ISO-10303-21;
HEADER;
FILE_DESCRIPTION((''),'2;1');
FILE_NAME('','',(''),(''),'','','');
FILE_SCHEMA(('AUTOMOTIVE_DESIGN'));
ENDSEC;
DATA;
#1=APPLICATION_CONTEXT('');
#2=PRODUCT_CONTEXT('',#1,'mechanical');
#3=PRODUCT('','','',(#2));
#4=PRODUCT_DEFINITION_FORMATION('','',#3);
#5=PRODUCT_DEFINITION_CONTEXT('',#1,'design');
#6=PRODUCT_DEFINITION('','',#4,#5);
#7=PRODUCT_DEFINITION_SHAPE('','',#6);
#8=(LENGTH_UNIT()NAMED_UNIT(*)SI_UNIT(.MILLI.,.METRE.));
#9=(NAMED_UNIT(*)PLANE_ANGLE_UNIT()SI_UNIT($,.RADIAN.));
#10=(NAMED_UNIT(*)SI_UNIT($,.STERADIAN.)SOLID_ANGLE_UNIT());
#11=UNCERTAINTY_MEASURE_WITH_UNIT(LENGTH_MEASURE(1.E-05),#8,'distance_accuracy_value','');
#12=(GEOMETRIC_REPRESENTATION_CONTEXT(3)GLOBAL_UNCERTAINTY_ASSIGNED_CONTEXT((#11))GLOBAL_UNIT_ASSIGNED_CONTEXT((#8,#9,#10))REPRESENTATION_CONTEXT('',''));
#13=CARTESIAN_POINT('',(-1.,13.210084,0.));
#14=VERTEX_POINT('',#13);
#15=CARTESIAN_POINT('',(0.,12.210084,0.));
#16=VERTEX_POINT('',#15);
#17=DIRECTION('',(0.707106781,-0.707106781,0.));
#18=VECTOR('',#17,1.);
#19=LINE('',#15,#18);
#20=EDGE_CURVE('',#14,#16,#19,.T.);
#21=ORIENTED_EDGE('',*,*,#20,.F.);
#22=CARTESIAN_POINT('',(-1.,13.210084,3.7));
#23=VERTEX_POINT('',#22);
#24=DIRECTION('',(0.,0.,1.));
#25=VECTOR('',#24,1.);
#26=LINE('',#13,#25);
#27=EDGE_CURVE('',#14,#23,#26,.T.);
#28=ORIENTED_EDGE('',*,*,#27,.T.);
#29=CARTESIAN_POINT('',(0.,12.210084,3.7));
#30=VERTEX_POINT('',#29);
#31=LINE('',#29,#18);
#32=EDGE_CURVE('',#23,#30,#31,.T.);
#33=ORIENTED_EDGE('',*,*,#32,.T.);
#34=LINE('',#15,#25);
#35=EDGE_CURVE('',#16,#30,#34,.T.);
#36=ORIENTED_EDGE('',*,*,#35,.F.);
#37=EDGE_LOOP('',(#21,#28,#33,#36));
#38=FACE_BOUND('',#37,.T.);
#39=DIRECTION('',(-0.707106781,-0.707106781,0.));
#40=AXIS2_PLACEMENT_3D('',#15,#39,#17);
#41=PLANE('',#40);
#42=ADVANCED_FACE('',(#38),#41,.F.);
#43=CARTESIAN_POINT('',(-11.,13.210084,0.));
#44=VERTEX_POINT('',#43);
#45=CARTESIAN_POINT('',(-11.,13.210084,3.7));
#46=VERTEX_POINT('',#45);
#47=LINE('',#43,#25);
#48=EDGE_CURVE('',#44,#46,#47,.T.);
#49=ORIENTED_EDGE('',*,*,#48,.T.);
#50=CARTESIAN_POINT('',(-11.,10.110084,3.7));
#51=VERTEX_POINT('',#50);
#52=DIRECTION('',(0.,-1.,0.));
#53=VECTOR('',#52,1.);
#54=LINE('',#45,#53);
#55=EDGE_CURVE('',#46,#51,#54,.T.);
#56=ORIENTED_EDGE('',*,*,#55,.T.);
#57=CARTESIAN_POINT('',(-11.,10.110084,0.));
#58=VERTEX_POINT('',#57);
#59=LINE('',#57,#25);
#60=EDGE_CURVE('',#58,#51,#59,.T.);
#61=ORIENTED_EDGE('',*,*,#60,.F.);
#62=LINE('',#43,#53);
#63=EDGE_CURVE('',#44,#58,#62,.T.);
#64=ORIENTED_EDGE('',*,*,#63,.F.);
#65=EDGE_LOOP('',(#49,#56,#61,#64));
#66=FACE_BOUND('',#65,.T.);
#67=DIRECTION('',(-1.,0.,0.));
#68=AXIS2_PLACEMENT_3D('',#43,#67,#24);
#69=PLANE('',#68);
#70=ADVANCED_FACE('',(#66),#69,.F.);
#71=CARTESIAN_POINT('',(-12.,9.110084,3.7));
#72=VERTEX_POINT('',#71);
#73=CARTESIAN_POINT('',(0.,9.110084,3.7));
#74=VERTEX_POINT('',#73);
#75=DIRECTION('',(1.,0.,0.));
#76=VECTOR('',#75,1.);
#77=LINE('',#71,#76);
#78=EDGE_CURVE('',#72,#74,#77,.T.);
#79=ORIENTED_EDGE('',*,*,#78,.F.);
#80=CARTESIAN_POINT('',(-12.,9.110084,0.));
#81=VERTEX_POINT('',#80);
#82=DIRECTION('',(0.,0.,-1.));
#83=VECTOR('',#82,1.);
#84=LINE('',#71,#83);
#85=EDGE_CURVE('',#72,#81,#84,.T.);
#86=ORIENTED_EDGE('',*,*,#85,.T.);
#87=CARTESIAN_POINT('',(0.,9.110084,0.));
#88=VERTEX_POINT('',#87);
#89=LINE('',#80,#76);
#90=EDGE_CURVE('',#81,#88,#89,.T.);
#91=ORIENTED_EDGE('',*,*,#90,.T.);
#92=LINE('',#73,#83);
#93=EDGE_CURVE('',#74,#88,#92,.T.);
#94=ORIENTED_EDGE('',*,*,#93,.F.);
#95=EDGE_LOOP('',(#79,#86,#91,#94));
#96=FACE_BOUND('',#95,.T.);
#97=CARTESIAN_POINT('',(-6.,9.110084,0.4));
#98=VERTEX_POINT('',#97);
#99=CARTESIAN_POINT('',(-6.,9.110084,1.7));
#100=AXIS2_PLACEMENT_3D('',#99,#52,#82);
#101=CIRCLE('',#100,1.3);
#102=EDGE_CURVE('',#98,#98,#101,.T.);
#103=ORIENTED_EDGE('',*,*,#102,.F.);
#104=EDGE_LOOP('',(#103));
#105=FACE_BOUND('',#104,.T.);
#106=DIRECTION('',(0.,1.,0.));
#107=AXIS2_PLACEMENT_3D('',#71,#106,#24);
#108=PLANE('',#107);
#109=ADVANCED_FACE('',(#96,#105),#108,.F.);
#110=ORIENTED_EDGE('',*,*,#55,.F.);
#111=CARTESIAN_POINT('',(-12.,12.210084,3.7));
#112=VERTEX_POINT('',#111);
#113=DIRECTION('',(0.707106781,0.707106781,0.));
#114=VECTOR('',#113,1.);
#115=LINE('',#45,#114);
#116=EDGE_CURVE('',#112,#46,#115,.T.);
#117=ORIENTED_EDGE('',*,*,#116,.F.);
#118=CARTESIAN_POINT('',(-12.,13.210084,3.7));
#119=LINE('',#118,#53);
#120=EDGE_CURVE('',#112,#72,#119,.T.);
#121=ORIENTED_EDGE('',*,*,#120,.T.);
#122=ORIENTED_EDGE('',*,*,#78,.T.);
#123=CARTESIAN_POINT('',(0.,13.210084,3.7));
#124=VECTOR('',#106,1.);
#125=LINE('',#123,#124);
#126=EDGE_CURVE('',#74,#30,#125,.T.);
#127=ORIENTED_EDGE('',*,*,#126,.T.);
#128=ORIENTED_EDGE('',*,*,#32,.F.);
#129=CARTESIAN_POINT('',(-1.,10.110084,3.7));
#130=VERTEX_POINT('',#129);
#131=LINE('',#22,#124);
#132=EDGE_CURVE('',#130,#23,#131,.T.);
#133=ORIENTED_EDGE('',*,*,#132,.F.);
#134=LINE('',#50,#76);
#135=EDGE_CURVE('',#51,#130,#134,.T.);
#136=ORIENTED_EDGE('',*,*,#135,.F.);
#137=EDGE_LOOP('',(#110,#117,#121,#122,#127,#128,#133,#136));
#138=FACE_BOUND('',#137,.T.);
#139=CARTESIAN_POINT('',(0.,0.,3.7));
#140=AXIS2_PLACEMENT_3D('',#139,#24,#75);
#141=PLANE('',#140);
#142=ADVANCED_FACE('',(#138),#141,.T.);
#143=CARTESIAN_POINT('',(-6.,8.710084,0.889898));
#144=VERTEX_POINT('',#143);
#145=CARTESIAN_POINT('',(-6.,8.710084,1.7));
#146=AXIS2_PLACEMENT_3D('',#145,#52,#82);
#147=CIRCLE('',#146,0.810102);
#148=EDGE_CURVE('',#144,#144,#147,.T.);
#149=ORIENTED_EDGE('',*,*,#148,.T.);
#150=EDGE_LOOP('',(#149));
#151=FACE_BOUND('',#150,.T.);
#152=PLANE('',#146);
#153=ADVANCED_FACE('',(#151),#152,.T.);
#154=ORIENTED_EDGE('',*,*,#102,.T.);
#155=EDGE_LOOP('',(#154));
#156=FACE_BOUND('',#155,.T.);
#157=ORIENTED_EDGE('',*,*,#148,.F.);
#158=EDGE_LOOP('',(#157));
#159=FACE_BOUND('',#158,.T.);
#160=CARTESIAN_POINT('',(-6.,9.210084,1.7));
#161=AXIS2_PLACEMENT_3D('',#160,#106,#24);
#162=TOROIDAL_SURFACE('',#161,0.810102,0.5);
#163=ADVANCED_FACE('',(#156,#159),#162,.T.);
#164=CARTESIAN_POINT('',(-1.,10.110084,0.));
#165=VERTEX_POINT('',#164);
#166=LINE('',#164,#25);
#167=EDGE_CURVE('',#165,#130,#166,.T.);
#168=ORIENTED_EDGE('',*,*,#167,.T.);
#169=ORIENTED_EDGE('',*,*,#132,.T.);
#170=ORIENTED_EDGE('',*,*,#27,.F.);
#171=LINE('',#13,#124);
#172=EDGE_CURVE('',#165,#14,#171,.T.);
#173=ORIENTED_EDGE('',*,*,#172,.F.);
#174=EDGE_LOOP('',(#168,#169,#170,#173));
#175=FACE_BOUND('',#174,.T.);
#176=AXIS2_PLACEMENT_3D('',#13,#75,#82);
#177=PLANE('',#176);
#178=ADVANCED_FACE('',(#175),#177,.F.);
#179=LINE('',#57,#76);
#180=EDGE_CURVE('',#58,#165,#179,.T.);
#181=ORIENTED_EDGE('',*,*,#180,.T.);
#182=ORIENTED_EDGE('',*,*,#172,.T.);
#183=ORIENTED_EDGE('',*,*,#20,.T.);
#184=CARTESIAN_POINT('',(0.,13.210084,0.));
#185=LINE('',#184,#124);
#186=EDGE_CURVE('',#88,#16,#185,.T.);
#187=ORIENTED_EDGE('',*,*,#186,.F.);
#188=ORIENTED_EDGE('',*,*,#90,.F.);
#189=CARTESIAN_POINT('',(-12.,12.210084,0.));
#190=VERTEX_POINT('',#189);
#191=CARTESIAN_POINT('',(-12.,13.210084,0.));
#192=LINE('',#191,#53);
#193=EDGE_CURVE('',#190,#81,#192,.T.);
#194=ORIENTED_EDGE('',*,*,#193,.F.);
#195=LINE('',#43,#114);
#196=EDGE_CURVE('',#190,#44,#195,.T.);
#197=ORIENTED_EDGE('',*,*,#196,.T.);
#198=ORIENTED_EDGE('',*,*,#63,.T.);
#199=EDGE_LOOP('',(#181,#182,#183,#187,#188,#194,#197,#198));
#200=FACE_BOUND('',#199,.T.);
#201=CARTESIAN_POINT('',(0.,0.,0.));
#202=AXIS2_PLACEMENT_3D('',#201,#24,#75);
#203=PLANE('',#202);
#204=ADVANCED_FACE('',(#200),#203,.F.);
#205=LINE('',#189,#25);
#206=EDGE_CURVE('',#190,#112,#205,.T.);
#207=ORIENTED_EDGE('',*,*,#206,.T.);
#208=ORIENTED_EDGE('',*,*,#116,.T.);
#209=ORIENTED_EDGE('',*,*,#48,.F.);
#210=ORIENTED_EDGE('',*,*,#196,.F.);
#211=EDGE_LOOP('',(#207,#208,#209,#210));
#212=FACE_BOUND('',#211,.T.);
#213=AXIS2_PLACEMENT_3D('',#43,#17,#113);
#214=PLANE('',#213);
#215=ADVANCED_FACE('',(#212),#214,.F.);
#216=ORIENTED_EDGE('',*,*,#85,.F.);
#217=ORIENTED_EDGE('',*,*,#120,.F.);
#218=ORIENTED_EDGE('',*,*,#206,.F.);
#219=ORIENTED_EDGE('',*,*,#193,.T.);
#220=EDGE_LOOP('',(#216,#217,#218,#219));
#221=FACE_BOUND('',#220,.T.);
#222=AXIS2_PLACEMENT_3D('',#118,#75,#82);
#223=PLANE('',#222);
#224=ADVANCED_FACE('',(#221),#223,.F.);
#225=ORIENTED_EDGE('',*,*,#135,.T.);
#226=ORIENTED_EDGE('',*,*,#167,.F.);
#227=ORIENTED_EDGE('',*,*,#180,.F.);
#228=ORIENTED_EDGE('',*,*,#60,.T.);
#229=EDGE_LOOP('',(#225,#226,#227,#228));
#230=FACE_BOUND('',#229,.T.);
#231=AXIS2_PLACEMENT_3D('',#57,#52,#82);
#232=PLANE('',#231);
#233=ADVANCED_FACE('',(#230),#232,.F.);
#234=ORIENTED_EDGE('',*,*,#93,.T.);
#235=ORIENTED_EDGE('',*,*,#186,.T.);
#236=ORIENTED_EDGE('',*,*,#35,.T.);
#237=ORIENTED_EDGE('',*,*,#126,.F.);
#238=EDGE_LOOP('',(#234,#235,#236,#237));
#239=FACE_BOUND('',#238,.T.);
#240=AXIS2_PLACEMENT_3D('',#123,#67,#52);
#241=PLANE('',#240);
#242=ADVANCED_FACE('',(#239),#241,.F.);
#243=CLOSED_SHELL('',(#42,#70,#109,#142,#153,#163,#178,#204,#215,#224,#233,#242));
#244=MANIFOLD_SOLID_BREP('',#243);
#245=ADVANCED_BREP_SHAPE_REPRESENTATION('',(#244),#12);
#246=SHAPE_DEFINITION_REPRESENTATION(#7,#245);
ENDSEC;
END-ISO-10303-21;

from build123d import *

# Parameters (mm, degrees)
SKETCH1_W           = 12
SKETCH1_H           = 4.1
BOSS_EXTRUDE1_DEPTH = 3.7
CUT_EXTRUDE1_DEPTH  = 3.7
CUT_EXTRUDE2_DEPTH  = 3.7
SKETCH5_R           = 1.3
BOSS_EXTRUDE2_DEPTH = 0.4
FILLET1_R           = 0.5
SKETCH6_W           = 10
SKETCH6_H           = 3.1
CUT_EXTRUDE3_DEPTH  = 19.226253597


with BuildPart() as part:
    # Sketch1 → Boss-Extrude1 (new body)
    with BuildSketch(Plane.XY):
        with Locations((-6, 11.160084034)):
            Rectangle(SKETCH1_W, SKETCH1_H)
    extrude(amount=BOSS_EXTRUDE1_DEPTH)

    # Sketch3 → Cut-Extrude1 (cut)
    with BuildSketch(Plane.XY.offset(3.7)):
        Polygon((-1, 13.210084034), (0, 13.210084034), (0, 12.210084034), align=None)
    extrude(amount=-CUT_EXTRUDE1_DEPTH, mode=Mode.SUBTRACT)

    # Sketch4 → Cut-Extrude2 (cut)
    with BuildSketch(Plane.XY.offset(3.7)):
        Polygon((-12, 13.210084034), (-11, 13.210084034), (-12, 12.210084034), align=None)
    extrude(amount=-CUT_EXTRUDE2_DEPTH, mode=Mode.SUBTRACT)

    # Sketch5 → Boss-Extrude2 (add)
    with BuildSketch(Plane.XZ.offset(-9.110084034)):
        with Locations(Location((-6, 1.7, 0), (0, 0, 270))):
            Circle(SKETCH5_R)
    extrude(amount=BOSS_EXTRUDE2_DEPTH)

    # Fillet1
    # the kernel refuses this fillet: 0.5 mm, written as the material it takes off along each edge
    with BuildSketch(Plane(origin=(-6, 8.710084034, 1.7), x_dir=(0, 0, -1), z_dir=(-1, 0, 0))) as fillet1_piece_1:
        with BuildLine():
            CenterArc((0.810102051, -0.5), FILLET1_R, 11.536959033, 78.463040967)
            Line((0.810102051, 0), (0.810102051, 0.01))
            Line((0.810102051, 0.01), (1.3, 0.01))
            Line((1.3, 0.01), (1.31, 0))
            ThreePointArc((1.31, 0), (1.31, -0.2), (1.309797959, -0.398))
            Line((1.309797959, -0.398), (1.3, -0.4))
        make_face()
    revolve(axis=Axis((-6, 8.710084034, 1.7), (0, -1, 0)), mode=Mode.SUBTRACT)

    # Sketch6 → Cut-Extrude3 (cut, through all)
    with BuildSketch(Plane.XY.offset(3.7)):
        with Locations((-6, 11.660084034)):
            Rectangle(SKETCH6_W, SKETCH6_H)
    extrude(amount=-CUT_EXTRUDE3_DEPTH, mode=Mode.SUBTRACT)


solid = part.part
